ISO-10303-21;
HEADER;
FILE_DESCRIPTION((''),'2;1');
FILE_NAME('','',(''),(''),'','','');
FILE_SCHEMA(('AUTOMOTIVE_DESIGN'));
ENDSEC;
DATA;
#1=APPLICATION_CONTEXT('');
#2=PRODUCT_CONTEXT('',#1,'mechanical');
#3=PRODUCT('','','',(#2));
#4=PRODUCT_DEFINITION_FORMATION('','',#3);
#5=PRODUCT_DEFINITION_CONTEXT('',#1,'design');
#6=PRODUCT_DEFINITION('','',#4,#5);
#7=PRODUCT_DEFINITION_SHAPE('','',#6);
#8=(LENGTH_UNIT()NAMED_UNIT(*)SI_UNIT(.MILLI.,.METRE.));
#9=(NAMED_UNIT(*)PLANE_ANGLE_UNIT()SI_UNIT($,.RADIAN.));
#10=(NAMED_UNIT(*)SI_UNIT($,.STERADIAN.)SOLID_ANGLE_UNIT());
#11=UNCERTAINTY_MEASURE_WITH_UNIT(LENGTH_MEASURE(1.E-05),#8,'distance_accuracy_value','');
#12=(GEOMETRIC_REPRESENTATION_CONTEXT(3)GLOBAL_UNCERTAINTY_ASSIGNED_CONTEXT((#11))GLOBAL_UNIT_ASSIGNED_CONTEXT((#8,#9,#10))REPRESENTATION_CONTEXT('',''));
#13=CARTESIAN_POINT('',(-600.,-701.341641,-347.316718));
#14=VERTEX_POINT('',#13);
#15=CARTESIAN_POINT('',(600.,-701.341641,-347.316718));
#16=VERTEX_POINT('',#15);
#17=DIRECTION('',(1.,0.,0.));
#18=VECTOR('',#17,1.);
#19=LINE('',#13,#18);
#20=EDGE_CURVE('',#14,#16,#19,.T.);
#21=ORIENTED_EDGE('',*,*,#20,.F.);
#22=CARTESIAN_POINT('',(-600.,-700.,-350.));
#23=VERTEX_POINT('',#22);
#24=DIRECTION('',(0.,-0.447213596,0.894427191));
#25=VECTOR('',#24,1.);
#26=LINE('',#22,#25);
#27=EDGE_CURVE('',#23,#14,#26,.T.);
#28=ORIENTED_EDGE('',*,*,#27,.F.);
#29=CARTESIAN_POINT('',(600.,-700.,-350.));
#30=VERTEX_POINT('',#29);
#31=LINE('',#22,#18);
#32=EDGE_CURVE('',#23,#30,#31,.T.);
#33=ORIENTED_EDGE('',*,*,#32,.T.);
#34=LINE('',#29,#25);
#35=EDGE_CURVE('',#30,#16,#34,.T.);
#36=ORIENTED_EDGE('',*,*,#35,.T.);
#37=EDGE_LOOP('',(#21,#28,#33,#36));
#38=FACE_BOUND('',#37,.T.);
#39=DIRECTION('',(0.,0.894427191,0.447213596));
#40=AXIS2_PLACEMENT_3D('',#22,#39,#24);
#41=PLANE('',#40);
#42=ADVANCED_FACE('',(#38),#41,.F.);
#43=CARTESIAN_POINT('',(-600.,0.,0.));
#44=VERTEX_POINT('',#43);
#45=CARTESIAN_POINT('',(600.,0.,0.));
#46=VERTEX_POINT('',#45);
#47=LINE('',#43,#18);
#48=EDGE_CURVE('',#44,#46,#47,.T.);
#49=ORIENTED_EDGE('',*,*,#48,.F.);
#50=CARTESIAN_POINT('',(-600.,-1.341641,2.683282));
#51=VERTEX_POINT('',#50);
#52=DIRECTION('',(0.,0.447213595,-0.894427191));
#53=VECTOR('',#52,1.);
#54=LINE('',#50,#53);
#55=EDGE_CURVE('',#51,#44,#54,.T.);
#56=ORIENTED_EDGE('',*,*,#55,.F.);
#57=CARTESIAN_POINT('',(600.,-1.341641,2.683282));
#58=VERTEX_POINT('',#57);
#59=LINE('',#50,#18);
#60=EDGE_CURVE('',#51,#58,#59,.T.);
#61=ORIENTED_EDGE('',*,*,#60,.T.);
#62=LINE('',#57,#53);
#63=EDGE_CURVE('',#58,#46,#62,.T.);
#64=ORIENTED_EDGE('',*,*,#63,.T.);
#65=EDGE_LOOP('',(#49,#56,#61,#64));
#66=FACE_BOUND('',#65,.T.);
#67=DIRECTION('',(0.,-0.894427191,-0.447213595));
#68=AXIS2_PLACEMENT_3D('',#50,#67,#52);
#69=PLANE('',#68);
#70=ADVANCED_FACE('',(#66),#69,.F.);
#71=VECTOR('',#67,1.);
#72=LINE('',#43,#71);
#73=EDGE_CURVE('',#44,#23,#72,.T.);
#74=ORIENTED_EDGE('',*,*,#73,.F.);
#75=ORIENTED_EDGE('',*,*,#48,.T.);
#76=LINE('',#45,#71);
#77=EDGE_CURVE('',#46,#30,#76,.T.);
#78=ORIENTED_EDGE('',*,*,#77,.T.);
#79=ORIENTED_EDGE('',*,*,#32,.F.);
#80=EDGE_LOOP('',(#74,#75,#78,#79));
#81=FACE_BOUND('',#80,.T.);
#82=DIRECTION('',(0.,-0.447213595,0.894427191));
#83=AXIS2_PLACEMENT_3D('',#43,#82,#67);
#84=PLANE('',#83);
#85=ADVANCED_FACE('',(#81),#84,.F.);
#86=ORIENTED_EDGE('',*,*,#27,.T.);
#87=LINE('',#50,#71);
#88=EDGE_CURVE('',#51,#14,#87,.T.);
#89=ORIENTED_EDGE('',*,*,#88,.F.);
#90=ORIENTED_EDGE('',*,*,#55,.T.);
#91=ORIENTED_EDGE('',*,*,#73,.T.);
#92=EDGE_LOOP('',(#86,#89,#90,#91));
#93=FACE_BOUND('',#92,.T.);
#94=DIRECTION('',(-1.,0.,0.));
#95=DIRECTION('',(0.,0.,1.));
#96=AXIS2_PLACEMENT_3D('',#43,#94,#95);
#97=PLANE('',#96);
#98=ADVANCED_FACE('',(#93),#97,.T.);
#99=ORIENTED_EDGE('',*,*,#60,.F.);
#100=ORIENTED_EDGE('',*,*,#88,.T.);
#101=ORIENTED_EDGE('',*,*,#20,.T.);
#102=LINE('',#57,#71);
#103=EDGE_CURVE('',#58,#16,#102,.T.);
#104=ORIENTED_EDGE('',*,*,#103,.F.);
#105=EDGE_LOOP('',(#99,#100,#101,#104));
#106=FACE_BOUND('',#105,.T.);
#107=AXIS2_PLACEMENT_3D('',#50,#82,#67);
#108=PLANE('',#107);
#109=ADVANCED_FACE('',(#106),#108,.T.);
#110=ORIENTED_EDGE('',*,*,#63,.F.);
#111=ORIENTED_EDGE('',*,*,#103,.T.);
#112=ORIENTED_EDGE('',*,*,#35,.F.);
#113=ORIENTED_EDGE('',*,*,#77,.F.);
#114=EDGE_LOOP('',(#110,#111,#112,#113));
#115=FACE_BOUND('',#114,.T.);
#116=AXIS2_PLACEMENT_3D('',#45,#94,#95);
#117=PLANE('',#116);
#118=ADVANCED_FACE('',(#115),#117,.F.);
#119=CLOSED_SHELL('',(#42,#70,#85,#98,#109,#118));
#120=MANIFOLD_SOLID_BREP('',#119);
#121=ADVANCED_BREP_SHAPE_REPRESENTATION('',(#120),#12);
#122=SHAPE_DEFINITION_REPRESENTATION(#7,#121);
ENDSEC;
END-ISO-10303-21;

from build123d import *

# Parameters (mm, degrees)
BASE_FLANGE1_DEPTH = 600


# Sheet-metal steps are written as plain solids
with BuildPart() as part:
    # Sketch1 → Base-Flange1 (new, symmetric)
    with BuildSketch(Plane(origin=(0, 0, 0), x_dir=(0, 0, -1), z_dir=(1, 0, 0))):
        Polygon((0, 0), (350, -700), (347.316718427, -701.341640786), (-2.683281573, -1.341640786), align=None)
    extrude(amount=BASE_FLANGE1_DEPTH, both=True)


solid = part.part
